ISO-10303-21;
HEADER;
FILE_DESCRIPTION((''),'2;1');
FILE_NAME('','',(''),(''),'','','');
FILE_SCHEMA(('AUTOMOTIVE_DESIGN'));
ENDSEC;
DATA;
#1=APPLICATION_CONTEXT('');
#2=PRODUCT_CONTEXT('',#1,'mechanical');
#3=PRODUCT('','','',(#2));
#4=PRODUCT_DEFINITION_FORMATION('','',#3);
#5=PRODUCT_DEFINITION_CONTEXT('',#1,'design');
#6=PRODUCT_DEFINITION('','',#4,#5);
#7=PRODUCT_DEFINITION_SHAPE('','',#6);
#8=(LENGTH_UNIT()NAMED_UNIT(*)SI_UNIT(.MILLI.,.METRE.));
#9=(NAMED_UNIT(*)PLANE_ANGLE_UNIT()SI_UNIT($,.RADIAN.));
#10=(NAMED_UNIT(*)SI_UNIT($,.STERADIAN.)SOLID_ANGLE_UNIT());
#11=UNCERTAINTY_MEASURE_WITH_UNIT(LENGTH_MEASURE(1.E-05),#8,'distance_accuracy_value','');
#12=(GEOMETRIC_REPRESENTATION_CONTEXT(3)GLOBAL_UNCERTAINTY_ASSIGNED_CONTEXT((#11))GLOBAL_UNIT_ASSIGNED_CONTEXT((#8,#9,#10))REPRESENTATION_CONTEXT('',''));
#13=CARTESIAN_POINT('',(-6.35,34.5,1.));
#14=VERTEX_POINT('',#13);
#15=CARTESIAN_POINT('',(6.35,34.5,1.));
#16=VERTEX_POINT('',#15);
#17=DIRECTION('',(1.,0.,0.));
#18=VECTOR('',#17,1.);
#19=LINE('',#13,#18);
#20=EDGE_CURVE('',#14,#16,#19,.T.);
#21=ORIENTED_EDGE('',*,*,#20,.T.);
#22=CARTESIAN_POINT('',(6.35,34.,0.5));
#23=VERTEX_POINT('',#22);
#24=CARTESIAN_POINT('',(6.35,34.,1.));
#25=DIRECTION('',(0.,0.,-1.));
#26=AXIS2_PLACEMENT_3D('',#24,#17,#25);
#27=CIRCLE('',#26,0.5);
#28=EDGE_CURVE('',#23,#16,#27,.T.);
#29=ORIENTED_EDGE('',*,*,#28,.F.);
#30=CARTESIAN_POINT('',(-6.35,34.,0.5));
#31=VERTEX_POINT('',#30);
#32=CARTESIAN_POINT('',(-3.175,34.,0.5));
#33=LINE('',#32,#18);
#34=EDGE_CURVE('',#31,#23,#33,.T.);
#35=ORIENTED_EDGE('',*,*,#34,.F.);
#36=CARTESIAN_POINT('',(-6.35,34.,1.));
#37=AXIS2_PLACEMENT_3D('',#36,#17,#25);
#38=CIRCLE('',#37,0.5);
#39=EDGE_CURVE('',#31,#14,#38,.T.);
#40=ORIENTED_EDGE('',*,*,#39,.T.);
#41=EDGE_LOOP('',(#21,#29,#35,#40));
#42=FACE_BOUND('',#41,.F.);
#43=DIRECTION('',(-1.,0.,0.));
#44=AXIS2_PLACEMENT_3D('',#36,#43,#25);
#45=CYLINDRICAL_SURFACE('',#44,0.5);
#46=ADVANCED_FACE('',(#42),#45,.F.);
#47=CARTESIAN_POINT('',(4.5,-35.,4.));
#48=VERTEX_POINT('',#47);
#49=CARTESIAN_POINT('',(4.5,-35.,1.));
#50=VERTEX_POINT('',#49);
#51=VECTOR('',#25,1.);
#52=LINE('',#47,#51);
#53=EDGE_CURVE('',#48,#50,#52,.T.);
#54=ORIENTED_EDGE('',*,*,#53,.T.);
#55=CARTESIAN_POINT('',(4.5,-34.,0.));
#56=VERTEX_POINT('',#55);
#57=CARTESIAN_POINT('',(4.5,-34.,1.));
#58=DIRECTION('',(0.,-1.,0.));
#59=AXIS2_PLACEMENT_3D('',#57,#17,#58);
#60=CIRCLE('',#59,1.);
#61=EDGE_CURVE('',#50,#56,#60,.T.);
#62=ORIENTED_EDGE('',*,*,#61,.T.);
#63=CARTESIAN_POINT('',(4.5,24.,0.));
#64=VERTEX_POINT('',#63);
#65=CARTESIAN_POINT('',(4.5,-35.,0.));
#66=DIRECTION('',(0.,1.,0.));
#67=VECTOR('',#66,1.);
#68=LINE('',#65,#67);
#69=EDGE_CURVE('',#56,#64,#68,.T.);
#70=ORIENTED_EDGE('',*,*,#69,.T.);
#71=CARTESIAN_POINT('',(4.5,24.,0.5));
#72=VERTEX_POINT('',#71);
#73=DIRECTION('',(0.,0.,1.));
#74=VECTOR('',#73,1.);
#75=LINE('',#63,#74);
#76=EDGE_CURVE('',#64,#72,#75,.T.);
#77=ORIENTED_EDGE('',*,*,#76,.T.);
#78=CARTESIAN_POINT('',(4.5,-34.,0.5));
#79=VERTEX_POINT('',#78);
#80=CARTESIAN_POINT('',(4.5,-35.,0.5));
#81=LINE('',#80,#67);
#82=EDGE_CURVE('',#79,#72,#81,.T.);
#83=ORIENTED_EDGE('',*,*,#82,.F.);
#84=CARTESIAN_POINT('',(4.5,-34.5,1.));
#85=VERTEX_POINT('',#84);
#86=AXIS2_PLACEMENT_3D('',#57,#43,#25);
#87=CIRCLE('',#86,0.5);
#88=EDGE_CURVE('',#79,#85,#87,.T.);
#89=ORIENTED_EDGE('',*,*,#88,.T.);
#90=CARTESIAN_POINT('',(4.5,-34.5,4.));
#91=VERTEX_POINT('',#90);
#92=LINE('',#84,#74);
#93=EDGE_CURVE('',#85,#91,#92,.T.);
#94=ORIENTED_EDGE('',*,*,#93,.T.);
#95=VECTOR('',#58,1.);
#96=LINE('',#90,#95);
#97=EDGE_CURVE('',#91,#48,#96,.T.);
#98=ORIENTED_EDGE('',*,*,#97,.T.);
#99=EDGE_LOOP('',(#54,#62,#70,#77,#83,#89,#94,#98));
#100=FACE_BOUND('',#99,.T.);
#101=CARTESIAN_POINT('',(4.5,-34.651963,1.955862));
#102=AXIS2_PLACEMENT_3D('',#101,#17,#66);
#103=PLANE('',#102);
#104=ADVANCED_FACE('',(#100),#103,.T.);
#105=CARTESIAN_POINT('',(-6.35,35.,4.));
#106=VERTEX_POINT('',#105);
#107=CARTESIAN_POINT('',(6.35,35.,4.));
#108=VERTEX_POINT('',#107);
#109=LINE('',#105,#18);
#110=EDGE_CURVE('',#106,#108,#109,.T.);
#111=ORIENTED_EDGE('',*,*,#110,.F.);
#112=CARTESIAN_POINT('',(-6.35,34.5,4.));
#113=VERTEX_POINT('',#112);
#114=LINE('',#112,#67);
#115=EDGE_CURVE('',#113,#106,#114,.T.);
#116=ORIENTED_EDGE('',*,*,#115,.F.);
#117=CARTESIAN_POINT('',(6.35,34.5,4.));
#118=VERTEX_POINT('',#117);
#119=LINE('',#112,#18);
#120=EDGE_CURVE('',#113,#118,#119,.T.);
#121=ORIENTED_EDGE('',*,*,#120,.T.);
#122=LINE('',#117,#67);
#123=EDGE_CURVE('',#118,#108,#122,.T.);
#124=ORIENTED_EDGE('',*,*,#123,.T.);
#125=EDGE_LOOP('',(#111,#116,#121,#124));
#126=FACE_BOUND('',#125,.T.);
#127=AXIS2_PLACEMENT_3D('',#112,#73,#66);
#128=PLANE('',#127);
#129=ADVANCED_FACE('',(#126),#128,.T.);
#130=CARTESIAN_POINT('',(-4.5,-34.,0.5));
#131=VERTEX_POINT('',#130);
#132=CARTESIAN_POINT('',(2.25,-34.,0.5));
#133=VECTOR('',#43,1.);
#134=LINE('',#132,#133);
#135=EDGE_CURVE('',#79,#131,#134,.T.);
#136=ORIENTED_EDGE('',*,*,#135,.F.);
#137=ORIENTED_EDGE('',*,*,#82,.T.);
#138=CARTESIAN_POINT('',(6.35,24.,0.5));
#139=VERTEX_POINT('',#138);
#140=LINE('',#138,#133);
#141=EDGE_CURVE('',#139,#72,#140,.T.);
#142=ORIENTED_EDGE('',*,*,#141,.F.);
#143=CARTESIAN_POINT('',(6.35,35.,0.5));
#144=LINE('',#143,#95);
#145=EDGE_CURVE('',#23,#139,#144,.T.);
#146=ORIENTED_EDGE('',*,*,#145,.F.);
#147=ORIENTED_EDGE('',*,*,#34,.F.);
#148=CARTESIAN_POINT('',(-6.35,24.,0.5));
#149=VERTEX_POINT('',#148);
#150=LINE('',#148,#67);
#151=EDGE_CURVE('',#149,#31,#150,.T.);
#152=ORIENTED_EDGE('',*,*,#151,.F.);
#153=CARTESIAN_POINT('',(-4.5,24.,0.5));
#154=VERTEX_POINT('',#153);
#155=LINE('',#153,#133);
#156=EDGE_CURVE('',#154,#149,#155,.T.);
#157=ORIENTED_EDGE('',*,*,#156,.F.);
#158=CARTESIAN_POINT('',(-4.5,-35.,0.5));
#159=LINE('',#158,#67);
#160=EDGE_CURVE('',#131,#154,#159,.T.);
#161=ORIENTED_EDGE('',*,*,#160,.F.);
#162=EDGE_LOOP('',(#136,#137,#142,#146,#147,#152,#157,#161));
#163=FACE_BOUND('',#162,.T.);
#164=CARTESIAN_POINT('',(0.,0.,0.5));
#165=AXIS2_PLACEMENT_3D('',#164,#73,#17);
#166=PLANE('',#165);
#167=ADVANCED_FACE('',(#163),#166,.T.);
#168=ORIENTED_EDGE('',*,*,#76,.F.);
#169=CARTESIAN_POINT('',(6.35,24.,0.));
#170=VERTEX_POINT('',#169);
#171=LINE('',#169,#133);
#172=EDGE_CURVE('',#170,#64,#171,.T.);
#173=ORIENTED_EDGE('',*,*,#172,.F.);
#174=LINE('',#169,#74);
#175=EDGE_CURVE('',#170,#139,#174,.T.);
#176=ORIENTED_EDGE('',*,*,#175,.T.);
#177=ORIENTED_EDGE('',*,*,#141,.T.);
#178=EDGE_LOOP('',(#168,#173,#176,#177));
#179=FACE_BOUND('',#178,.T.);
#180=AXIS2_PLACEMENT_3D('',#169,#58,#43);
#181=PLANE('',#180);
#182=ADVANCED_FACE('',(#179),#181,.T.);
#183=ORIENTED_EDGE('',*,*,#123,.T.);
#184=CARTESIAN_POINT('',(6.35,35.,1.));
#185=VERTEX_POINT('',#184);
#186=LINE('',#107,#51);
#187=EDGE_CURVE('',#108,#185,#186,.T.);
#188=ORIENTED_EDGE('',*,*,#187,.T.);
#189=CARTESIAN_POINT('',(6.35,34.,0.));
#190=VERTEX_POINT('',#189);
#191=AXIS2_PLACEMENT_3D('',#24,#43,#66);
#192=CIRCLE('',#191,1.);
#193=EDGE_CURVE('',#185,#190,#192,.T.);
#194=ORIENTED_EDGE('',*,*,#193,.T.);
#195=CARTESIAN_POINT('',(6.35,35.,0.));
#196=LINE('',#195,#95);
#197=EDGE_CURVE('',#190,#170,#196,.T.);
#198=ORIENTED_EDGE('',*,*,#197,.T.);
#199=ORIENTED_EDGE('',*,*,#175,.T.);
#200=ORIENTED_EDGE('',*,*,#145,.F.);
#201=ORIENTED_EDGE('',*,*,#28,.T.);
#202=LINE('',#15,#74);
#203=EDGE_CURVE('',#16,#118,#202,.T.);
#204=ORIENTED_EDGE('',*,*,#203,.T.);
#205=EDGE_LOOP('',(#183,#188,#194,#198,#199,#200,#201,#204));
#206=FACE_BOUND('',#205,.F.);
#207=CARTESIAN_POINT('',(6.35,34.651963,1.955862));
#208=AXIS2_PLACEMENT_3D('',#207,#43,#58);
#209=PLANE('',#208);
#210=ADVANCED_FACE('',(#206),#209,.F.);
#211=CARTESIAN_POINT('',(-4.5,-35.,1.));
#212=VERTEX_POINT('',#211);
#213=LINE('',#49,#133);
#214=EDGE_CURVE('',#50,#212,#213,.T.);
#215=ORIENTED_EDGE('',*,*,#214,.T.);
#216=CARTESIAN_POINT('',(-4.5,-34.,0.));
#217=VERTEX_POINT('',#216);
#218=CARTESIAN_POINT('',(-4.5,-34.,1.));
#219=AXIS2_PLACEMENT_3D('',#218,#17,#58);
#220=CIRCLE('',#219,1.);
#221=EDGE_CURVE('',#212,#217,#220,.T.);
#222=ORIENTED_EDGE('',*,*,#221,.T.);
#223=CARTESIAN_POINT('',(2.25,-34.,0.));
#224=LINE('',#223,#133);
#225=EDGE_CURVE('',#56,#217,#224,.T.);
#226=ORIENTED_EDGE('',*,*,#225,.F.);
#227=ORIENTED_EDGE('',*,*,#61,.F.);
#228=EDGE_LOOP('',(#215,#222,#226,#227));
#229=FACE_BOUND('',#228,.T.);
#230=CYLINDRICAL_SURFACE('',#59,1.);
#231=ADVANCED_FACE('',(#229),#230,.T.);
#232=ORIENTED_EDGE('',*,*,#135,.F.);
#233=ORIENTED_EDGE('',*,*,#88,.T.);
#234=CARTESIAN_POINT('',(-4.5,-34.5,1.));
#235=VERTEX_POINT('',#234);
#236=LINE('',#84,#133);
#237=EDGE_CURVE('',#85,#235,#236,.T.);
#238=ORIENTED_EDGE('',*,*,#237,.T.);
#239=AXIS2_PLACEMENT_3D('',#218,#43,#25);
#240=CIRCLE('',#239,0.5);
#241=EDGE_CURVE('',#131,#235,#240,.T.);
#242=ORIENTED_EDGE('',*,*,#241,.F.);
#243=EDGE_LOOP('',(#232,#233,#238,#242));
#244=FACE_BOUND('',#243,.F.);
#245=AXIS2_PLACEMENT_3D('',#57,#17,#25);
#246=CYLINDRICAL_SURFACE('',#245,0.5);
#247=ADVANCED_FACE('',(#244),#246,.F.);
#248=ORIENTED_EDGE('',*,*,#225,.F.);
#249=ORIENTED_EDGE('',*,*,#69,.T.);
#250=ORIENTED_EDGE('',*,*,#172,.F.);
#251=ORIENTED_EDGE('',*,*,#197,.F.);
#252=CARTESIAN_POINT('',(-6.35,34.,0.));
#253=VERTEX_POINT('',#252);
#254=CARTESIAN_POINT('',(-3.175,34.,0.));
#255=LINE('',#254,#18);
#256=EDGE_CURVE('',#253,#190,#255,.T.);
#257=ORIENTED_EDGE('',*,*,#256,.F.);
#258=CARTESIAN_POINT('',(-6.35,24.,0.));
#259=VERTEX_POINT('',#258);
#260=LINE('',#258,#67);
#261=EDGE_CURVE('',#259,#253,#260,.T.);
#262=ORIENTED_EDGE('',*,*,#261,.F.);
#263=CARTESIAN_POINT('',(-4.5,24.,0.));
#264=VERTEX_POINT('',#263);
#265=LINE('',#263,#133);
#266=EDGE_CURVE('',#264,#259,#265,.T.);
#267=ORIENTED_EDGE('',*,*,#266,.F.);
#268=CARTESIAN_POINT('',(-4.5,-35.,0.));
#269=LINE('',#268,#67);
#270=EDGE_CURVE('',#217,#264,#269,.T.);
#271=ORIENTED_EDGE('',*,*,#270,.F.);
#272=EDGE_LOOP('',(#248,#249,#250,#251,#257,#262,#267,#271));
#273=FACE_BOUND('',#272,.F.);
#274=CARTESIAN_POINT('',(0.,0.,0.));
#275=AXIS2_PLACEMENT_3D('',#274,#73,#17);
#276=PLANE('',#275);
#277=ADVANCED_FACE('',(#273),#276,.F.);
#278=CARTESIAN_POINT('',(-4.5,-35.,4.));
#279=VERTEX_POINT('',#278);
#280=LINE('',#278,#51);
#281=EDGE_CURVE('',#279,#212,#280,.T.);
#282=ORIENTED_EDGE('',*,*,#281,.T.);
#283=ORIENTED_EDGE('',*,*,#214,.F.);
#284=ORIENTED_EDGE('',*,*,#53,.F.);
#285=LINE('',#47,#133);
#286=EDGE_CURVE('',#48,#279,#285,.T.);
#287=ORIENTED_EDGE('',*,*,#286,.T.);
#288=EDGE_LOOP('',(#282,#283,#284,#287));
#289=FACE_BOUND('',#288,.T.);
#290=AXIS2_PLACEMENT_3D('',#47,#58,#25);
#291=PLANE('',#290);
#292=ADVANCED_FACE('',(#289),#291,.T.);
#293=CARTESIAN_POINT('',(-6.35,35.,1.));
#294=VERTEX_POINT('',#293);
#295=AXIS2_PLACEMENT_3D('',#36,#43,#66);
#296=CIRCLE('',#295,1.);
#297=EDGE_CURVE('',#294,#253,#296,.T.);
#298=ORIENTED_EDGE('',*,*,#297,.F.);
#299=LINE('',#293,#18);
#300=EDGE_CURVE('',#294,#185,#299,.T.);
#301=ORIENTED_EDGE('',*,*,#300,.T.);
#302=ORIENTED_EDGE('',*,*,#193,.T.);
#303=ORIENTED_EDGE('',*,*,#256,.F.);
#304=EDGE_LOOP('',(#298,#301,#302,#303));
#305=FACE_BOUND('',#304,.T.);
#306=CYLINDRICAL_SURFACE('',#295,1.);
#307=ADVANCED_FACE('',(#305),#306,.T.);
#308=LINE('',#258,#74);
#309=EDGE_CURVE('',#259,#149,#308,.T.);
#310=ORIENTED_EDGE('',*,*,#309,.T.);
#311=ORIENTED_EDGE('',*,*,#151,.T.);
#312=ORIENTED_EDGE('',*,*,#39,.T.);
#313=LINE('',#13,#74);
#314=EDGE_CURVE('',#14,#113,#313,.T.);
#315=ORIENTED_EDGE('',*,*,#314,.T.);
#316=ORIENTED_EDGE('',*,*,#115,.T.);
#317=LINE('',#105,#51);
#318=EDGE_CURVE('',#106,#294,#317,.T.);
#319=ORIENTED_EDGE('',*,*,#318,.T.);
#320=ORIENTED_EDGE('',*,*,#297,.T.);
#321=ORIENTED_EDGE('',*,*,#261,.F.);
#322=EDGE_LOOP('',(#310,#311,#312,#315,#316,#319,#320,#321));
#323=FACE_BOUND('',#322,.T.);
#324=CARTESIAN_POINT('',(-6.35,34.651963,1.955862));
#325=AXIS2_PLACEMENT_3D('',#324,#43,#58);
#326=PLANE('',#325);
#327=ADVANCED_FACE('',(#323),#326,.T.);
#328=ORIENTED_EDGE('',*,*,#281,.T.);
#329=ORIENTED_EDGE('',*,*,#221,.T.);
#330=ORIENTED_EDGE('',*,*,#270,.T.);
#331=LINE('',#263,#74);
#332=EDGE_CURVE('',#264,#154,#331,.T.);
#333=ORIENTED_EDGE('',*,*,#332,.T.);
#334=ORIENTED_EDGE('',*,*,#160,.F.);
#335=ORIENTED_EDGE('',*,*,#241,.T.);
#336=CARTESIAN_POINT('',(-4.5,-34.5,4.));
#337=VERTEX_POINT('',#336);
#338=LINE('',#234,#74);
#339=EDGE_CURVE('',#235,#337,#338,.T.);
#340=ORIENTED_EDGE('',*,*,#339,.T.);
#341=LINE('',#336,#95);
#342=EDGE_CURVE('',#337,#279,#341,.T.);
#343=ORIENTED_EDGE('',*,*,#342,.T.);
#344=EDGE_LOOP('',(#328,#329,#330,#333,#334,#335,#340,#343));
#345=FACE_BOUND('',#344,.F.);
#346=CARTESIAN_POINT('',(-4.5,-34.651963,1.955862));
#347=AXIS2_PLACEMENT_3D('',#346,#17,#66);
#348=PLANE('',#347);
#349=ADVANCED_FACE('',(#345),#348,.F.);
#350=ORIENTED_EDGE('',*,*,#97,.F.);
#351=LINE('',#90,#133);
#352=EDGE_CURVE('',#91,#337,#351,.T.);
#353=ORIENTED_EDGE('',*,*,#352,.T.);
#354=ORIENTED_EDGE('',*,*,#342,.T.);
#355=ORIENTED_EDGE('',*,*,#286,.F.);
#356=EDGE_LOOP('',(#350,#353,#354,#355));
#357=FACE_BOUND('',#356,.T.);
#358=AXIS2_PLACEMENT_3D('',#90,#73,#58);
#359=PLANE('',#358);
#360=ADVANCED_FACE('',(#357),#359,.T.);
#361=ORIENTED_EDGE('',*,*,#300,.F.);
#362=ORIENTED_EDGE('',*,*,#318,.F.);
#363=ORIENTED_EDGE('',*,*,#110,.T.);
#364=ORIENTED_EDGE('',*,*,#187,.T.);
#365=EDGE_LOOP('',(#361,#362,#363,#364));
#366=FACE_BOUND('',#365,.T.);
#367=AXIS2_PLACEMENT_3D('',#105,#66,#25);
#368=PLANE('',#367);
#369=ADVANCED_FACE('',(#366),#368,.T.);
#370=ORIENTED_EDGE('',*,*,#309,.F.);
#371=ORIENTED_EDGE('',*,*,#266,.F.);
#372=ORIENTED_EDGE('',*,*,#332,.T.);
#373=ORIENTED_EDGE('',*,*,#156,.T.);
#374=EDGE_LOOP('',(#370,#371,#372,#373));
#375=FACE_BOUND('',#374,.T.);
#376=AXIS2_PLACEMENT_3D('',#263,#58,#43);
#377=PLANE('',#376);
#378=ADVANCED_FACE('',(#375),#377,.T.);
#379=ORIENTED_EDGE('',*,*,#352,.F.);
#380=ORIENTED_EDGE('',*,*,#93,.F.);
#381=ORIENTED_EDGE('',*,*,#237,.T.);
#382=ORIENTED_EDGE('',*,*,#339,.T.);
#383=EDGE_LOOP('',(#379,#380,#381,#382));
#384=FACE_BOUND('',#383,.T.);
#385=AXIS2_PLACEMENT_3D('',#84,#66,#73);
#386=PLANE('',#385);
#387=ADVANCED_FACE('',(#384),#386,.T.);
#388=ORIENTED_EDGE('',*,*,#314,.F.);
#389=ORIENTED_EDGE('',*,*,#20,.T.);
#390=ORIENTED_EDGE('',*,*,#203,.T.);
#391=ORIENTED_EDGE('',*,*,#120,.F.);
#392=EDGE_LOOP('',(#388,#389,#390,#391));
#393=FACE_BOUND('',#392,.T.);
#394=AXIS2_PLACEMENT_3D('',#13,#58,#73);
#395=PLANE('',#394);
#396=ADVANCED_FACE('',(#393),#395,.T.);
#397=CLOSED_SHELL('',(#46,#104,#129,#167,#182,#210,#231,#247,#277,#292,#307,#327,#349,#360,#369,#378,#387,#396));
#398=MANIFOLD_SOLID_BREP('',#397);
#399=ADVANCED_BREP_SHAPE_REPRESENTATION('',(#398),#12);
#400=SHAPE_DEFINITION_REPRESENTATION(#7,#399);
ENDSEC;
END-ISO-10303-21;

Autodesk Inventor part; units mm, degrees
ref_plane "YZ Plane" through (0, 0, 0) normal (1, 0, 0) x (0, 1, 0)
ref_plane "XZ Plane" through (0, 0, 0) normal (0, 1, 0) x (-1, 0, 0)
ref_plane "XY Plane" through (0, 0, 0) normal (0, 0, 1) x (1, 0, 0)
sketch "Sketch1" plane through (0, 0, 0) normal (0, 0, 1) x (1, 0, 0)
  line L0 (0, 0) -> (6.3089, 0)
  line L1 (0, 0) -> (0, 8.1845)
  line L2 (4.5, 24) -> (4.5, -35)
  line L3 (4.5, -35) -> (-4.5, -35)
  line L4 (-4.5, -35) -> (-4.5, 24)
  line L5 (-6.35, 35) -> (6.35, 35)
  line L6 (6.35, 35) -> (6.35, 24)
  line L7 (-6.35, 24) -> (-6.35, 35)
  line L8 (6.35, 24) -> (4.5, 24)
  line L9 (-4.5, 24) -> (-6.35, 24)
  dimension "d4" = 9
  dimension "d5" = 12.7
  dimension "d6" = 70
  dimension "d7" = 11
extrude "Extrusion1" add sketch "Sketch1" along normal blind 0.5
sketch "Sketch2" plane through (-6.35, 34.5, 0) normal (0, 1, 0) x (-1, 0, 0)
  line L0 (-12.7, 0) -> (0, 0)
  line L1 (0, 0) -> (0, 4)
  line L2 (0, 4) -> (-12.7, 4)
  line L3 (-12.7, 4) -> (-12.7, 0)
edge flange "Flange1" height 4 angle 90 thickness 0.5 bend radius 0.5 thickness toward (0, 1, 0) relief straight relief width 0.5 relief depth 0.25 edges at (0, 35, 0.5) wall of the first edge with corners at (6.35, 34.5, 0) (-6.35, 34.5, 0) (-6.35, 34.5, 4) (6.35, 34.5, 4)
bend "Bend1"
corner "Corner1"
sketch "Sketch4" plane through (4.5, -34.5, 0) normal (0, -1, 0) x (1, 0, 0)
  line L0 (-9, 0) -> (0, 0)
  line L1 (0, 0) -> (0, 4)
  line L2 (0, 4) -> (-9, 4)
  line L3 (-9, 4) -> (-9, 0)
edge flange "Flange3" height 4 angle 90 thickness 0.5 bend radius 0.5 thickness toward (0, -1, 0) relief straight relief width 0.5 relief depth 0.25 edges at (0, -35, 0.5) wall of the first edge with corners at (-4.5, -34.5, 0) (4.5, -34.5, 0) (4.5, -34.5, 4) (-4.5, -34.5, 4)
bend "Bend3"
corner "Corner3"
equation "\"d8\" = BendReliefWidth"
equation "\"d9\" = BendReliefDepth"
equation "\"d10\" = MinimumRemnant"
equation "\"d11\" = BendRadius"
equation "\"d14\" = BendRadius"
equation "\"d15\" = CornerReliefSize"
equation "\"d16\" = GapSize"
equation "\"d17\" = JacobiRadiusSize"
equation "\"d28\" = BendReliefWidth"
equation "\"d29\" = BendReliefDepth"
equation "\"d30\" = MinimumRemnant"
equation "\"d31\" = BendRadius"
equation "\"d34\" = BendRadius"
equation "\"d35\" = CornerReliefSize"
equation "\"d36\" = GapSize"
equation "\"d37\" = JacobiRadiusSize"
equation "\"BendRadius\" = Thickness"
equation "\"BendReliefWidth\" = Thickness"
equation "\"BendReliefDepth\" = 0.5 * Thickness"
equation "\"CornerReliefSize\" = 4 * Thickness"
equation "\"MinimumRemnant\" = 2 * Thickness"
equation "\"TransitionRadius\" = BendRadius"
equation "\"JacobiRadiusSize\" = Thickness"
equation "\"GapSize\" = Thickness"
equation "\"Thickness\" = 0.5"
properties material "Aluminum-6061"
